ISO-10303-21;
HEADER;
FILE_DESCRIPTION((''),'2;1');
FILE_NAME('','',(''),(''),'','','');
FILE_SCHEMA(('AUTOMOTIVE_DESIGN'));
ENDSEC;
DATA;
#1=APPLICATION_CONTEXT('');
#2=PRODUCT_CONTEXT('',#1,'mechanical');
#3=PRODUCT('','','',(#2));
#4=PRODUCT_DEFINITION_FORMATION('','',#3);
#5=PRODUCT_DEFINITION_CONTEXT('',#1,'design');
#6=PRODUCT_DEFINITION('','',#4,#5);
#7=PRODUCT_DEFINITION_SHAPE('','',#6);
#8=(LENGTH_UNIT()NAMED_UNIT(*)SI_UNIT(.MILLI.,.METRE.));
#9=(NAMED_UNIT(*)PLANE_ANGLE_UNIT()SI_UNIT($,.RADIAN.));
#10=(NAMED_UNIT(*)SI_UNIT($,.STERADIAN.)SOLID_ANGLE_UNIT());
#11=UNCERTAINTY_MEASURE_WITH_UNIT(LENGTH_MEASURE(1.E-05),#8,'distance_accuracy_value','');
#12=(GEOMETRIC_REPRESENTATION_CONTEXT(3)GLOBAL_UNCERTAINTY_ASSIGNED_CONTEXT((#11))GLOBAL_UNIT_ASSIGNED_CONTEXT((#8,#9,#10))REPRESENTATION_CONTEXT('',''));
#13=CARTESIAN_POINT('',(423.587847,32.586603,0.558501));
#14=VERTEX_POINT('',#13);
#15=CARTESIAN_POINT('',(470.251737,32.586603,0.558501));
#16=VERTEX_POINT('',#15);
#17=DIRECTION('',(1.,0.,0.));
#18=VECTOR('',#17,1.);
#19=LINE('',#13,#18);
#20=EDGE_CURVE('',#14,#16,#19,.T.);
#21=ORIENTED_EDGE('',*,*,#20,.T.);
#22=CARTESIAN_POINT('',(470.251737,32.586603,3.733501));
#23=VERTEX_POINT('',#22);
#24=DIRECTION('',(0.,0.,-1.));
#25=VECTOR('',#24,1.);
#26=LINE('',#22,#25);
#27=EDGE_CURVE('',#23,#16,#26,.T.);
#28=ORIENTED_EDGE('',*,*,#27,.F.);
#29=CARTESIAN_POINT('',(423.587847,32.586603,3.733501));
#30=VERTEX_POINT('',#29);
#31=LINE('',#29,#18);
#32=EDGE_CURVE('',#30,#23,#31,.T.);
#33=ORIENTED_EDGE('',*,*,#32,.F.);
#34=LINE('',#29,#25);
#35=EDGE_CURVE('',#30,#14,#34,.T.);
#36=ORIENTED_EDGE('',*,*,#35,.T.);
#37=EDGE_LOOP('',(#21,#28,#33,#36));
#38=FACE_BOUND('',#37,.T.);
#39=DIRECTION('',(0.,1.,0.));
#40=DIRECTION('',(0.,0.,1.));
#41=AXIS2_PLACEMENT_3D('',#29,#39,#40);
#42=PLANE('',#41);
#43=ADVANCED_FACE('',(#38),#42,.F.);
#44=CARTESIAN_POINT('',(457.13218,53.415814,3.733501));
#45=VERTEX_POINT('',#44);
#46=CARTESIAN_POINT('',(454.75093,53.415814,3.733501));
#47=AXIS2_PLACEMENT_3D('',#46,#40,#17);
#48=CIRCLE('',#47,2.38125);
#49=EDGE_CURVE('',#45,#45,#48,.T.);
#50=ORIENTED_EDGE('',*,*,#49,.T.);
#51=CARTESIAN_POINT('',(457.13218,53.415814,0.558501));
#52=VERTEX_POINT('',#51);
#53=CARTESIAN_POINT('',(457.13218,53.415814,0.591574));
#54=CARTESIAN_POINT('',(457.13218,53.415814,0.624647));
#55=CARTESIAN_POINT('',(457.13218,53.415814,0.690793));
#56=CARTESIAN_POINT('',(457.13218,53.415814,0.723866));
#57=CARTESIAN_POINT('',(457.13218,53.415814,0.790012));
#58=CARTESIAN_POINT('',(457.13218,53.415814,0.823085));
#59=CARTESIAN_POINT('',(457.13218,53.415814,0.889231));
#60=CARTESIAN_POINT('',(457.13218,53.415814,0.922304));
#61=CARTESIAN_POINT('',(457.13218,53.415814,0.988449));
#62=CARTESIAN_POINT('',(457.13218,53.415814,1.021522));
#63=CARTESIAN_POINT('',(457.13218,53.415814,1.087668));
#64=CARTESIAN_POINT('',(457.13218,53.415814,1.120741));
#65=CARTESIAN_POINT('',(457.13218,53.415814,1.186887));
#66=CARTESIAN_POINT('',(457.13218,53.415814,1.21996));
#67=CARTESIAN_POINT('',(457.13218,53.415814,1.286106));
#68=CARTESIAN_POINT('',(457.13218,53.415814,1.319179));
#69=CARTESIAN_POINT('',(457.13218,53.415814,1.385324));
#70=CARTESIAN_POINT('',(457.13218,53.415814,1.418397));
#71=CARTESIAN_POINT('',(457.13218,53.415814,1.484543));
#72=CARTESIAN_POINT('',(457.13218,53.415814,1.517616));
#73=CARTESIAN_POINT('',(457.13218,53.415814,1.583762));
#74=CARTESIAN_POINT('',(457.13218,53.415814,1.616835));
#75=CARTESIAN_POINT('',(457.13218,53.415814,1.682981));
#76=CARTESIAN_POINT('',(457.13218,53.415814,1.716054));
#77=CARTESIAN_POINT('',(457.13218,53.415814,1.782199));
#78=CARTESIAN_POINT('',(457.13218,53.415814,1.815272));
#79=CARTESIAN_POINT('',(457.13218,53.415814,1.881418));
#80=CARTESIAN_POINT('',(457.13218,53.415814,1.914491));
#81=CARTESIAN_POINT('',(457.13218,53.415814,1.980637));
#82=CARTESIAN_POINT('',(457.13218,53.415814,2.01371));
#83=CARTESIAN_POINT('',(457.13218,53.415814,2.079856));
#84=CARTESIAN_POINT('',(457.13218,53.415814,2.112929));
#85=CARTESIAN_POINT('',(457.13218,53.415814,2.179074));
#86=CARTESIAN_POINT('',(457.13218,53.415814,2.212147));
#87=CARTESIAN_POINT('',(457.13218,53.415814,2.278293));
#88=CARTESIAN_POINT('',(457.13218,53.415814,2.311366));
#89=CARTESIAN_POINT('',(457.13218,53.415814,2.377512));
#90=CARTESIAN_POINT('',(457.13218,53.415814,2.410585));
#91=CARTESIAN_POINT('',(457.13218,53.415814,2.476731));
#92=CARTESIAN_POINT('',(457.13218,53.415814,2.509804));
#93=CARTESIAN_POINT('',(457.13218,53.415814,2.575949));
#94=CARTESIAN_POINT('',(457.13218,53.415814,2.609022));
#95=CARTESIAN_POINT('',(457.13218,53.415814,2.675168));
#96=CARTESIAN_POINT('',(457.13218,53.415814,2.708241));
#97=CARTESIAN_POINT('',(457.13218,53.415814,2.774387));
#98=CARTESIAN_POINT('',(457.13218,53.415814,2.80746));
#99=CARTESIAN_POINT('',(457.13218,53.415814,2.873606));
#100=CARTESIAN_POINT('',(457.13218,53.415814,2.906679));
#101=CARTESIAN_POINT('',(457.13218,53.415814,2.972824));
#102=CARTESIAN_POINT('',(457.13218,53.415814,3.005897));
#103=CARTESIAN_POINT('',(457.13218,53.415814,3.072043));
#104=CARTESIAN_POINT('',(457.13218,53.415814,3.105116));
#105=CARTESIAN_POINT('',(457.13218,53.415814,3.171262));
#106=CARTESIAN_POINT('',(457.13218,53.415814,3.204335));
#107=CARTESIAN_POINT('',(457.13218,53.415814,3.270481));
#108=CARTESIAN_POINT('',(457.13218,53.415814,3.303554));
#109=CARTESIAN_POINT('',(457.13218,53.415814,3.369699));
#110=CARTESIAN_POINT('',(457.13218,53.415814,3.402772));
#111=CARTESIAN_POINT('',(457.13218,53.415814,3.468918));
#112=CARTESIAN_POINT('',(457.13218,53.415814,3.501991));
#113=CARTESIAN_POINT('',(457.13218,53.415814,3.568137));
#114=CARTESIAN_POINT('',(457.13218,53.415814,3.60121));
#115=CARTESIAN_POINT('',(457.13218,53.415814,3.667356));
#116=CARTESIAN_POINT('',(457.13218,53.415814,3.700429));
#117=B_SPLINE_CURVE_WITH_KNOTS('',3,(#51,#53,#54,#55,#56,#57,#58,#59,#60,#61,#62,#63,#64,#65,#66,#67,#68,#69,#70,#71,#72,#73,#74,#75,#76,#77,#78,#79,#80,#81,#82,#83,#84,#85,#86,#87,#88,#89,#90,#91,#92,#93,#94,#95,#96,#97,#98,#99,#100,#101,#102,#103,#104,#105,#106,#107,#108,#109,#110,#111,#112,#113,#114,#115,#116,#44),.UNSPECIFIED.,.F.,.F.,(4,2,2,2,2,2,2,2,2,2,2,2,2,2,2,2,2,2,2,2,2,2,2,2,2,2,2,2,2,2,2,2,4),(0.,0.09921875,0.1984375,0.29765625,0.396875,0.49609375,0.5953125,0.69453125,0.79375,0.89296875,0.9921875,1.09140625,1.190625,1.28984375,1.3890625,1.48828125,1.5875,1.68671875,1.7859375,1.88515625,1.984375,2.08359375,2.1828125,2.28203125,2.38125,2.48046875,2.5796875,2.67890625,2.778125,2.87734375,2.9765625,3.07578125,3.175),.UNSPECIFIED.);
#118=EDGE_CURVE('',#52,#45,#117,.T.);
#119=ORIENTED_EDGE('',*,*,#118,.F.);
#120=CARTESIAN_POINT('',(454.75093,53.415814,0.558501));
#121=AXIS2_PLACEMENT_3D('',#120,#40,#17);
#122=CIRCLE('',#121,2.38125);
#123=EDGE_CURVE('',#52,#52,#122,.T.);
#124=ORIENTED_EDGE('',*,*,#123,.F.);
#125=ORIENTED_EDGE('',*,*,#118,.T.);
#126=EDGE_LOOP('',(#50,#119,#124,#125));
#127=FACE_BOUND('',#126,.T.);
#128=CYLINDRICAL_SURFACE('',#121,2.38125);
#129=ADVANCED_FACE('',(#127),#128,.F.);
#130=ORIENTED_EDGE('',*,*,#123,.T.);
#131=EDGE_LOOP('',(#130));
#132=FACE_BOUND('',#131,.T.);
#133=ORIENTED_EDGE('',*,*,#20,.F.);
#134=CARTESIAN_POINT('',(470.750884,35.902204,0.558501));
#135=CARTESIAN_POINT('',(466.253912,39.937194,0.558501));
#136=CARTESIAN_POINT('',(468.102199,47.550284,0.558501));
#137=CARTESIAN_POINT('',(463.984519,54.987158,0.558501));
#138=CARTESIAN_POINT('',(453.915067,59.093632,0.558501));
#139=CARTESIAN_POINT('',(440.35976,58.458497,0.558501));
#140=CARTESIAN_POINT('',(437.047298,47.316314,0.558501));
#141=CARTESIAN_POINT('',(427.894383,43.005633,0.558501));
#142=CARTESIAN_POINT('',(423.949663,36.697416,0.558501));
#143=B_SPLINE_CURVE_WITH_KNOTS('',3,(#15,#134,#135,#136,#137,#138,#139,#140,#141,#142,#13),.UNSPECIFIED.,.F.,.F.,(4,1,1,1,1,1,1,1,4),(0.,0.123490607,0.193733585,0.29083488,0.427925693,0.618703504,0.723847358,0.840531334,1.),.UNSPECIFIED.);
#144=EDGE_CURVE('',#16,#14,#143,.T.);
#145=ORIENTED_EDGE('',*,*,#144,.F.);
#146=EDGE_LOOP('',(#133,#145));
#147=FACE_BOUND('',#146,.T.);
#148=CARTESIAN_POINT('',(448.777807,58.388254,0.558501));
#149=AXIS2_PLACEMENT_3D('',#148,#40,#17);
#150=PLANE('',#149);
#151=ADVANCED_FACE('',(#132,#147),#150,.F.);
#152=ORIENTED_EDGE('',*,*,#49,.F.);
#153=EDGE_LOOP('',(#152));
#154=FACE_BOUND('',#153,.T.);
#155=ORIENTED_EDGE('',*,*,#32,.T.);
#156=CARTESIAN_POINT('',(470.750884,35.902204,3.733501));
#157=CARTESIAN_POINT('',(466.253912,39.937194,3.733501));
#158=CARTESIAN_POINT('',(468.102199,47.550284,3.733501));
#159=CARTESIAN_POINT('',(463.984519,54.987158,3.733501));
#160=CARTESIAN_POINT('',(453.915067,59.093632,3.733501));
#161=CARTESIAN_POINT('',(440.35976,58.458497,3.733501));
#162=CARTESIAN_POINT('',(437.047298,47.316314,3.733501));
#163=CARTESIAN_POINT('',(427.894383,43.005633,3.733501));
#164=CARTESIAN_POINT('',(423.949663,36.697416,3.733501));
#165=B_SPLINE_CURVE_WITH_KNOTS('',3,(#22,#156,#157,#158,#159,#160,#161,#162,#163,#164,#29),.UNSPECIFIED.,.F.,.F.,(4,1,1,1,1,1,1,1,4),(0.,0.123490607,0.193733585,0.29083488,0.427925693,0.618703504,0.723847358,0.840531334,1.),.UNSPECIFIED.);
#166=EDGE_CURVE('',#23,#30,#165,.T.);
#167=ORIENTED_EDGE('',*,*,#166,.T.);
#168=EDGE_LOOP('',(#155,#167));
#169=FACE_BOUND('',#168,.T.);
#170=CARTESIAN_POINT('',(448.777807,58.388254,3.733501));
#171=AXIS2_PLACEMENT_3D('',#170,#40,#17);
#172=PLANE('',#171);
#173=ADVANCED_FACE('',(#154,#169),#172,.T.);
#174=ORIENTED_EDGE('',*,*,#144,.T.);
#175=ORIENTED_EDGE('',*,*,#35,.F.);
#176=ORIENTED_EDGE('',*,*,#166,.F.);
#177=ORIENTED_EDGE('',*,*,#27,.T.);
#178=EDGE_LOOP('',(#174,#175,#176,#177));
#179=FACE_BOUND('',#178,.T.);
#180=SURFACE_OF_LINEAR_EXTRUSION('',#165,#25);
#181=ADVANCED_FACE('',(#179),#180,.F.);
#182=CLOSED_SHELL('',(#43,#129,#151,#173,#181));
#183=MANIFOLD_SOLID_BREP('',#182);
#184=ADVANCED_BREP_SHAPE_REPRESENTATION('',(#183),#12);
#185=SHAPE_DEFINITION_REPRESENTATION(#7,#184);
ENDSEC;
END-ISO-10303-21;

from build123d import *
from OCP.BRepAlgoAPI import BRepAlgoAPI_Cut
from OCP.TopTools import TopTools_ListOfShape

# Parameters (mm, degrees)
SKETCH1_R           = 1.905
BOSS_EXTRUDE1_DEPTH = 4.292022727
SCALE1_SCALE        = 0.739744452
SKETCH2_R           = 2.38125
CUT_EXTRUDE1_DEPTH  = 474.934058965


with BuildPart() as part:
    # Sketch1 → Boss-Extrude1 (new body)
    with BuildSketch(Plane.XY):
        with BuildLine():
            Line((414.664092284, 28.837959437), (477.745187058, 28.837959437))
            add(Edge.make_bspline(
                [(414.664092284, 28.837959437), (415.153200535, 34.395030861), (420.485745831, 42.922593868), (432.858822753, 48.749849518), (437.336668693, 63.812055241), (455.660979606, 64.670643077), (469.273047892, 59.119436778), (474.839401849, 49.066135717), (472.340854494, 38.774622034), (478.419942664, 33.320049008), (477.745187058, 28.837959437)],
                knots=[0, 0, 0, 0, 0.159468666, 0.276152642, 0.381296496, 0.572074307, 0.70916512, 0.806266415, 0.876509393, 1, 1, 1, 1], degree=3))
        make_face()
        with Locations((456.790913361, 56.995264717)):
            Circle(SKETCH1_R, mode=Mode.SUBTRACT)
    extrude(amount=BOSS_EXTRUDE1_DEPTH)


with BuildPart() as part_1:
    # Scale1: scaled about (448.952587877, 43.242185137, 2.146011363)
    add(part.part.scale(SCALE1_SCALE).moved(Location((116.842401821, 11.254018593, 0.558511363))))


with BuildPart() as cut_extrude1_tool:
    # Sketch2 → Cut-Extrude1 (new, through all)
    with BuildSketch(Plane.XY.offset(3.733501485)):
        with Locations((454.750929555, 53.415813648)):
            Circle(SKETCH2_R)
    extrude(amount=-CUT_EXTRUDE1_DEPTH)


with BuildPart() as part_2:
    add(part_1.part)

    # Cut-Extrude1: cut by cut_extrude1_tool, with a tolerance
    cut_extrude1_stock = TopTools_ListOfShape()
    cut_extrude1_stock.Append(part_2.part.wrapped)
    cut_extrude1_tools = TopTools_ListOfShape()
    cut_extrude1_tools.Append(cut_extrude1_tool.part.wrapped)
    cut_extrude1_cut = BRepAlgoAPI_Cut()
    cut_extrude1_cut.SetArguments(cut_extrude1_stock)
    cut_extrude1_cut.SetTools(cut_extrude1_tools)
    cut_extrude1_cut.SetFuzzyValue(0.00001)
    cut_extrude1_cut.Build()
    add(Compound.cast(cut_extrude1_cut.Shape()).solids(), mode=Mode.REPLACE)


solid = part_2.part
